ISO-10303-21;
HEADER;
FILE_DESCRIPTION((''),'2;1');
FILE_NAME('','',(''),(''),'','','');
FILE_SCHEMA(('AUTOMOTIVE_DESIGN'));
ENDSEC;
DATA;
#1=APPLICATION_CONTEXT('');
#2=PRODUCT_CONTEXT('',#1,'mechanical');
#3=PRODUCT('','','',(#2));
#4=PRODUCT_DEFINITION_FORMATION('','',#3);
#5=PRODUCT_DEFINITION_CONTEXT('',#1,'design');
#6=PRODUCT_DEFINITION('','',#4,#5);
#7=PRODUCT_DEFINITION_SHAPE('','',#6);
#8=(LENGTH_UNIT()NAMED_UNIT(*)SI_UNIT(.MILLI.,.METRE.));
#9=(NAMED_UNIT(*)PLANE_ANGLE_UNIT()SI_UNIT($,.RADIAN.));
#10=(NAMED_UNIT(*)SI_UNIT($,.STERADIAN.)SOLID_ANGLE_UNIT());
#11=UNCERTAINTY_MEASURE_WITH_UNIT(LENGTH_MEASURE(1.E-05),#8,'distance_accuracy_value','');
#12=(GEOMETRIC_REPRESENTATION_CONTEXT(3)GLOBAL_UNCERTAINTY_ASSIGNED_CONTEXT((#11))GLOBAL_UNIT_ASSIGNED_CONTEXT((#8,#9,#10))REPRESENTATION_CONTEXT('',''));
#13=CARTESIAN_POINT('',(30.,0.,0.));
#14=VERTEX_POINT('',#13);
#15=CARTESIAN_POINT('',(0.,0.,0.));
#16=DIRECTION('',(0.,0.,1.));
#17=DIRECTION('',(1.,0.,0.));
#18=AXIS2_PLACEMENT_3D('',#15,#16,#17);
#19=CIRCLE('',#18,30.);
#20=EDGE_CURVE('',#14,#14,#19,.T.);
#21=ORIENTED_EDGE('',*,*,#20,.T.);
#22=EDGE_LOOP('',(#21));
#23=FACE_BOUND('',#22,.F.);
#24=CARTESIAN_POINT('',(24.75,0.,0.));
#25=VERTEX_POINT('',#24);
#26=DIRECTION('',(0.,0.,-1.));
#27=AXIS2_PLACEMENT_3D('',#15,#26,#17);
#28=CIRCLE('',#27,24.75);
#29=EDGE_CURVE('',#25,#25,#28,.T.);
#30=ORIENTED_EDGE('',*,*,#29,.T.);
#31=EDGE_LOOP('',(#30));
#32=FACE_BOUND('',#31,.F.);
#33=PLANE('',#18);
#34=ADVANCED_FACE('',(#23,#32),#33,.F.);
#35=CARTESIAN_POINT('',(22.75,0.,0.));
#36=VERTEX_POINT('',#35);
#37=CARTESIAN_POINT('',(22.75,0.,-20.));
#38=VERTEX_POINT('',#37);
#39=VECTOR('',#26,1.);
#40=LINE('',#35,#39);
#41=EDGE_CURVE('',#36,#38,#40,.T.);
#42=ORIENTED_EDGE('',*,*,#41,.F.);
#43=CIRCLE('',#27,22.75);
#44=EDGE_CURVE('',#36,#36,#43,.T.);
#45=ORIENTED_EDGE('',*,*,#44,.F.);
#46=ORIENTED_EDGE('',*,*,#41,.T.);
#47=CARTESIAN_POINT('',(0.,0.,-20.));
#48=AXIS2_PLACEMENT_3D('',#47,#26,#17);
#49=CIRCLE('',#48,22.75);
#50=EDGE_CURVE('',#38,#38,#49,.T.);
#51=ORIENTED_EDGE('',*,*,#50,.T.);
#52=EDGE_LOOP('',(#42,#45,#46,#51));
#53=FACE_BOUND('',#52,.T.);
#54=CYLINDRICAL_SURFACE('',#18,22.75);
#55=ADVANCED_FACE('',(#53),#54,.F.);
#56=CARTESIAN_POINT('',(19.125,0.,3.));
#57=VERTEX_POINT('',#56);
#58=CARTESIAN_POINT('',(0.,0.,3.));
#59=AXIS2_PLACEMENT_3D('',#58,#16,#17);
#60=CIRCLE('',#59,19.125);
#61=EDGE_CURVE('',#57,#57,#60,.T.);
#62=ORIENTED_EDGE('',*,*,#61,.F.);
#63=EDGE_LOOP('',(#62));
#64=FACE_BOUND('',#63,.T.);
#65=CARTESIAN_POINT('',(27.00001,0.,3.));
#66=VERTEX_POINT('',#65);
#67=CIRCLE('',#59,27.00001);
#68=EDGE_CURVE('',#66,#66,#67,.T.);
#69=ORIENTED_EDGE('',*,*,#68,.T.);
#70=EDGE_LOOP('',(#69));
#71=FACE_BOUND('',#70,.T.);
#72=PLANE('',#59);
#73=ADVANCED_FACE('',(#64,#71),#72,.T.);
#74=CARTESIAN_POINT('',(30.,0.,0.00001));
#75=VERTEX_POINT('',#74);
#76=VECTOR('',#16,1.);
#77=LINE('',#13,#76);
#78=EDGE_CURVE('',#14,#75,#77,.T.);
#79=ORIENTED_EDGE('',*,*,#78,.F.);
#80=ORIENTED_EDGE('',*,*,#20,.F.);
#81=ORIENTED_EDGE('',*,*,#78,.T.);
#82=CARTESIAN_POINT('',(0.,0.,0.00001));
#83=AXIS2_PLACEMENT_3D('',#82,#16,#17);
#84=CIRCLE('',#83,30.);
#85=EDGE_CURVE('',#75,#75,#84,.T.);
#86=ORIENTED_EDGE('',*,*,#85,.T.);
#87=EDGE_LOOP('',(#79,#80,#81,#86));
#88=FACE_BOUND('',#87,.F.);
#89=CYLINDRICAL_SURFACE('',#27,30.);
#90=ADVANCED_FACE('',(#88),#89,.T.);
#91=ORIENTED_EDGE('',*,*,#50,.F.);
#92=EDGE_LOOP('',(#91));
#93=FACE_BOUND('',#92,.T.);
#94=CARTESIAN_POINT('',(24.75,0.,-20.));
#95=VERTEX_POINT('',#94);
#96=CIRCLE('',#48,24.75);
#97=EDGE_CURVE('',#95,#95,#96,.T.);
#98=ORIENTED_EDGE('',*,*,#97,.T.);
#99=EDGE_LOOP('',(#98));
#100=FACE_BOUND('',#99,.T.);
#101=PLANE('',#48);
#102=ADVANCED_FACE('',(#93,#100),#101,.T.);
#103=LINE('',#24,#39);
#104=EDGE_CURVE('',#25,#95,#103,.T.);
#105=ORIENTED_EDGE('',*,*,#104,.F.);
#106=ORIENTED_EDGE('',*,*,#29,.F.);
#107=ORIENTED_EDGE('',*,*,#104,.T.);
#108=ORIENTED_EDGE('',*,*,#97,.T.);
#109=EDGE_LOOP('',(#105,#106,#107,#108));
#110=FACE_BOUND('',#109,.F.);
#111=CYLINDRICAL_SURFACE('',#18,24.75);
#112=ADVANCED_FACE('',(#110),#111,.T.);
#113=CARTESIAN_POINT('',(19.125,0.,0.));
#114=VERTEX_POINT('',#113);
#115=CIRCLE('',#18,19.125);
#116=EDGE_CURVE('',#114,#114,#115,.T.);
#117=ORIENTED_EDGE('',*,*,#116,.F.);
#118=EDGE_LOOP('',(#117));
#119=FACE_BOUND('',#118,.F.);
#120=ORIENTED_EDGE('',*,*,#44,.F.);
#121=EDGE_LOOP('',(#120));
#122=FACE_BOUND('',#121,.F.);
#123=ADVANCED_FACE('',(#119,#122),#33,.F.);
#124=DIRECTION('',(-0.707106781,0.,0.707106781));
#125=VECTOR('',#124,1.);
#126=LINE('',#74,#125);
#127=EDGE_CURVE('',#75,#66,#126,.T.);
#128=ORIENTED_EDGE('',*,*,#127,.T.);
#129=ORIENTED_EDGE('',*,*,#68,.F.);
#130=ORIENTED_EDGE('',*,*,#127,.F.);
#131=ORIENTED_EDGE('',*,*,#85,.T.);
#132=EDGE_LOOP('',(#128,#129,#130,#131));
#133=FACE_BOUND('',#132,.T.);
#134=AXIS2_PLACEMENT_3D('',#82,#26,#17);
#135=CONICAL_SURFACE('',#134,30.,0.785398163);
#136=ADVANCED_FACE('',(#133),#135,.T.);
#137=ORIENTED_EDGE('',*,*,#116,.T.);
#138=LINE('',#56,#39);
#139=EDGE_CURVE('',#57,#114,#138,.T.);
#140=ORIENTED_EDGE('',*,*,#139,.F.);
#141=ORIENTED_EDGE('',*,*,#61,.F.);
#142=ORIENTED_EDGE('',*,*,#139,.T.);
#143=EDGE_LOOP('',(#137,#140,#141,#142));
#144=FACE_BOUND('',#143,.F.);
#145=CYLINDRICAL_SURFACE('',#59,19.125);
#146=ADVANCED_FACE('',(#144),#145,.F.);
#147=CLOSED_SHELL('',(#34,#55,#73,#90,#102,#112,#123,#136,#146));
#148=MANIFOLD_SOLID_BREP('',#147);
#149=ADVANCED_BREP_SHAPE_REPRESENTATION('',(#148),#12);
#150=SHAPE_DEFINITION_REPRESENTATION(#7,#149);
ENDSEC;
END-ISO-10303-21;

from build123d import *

# Parameters (mm, degrees)
F0_R     = 30
F1_DEPTH = 3
F2_SIZE  = 2.99999
F3_R     = 19.125
F4_DEPTH = 3.001
F5_R     = 24.75
F5_R_2   = 22.75
F6_DEPTH = 20


# Not quite as in the source:
# - a fillet or chamfer is up to 0.001 mm smaller than in the source, because OpenCascade refuses the exact size


with BuildPart() as f1:
    # F0 (on Top) → F1 (new body)
    with BuildSketch(Plane.XY):
        Circle(F0_R)
    extrude(amount=F1_DEPTH)

    # F2 (size 3 in the source; OpenCascade refuses exactly that, so slightly less here)
    f2_edges = [f1.edges().sort_by_distance(p)[0] for p in [
        (-30, 0, 3),
    ]]
    chamfer(f2_edges, length=F2_SIZE)

    # F3 (on face) → F4 (cut, through all)
    with BuildSketch(Plane.XY.offset(3)):
        Circle(F3_R)
    extrude(amount=-F4_DEPTH, mode=Mode.SUBTRACT)

    # F5 (on face) → F6 (join)
    with BuildSketch(Plane(origin=(0, 0, 0), x_dir=(1, 0, 0), z_dir=(0, 0, -1))):
        Circle(F5_R)
        Circle(F5_R_2, mode=Mode.SUBTRACT)
    extrude(amount=F6_DEPTH)


solid = f1.part
